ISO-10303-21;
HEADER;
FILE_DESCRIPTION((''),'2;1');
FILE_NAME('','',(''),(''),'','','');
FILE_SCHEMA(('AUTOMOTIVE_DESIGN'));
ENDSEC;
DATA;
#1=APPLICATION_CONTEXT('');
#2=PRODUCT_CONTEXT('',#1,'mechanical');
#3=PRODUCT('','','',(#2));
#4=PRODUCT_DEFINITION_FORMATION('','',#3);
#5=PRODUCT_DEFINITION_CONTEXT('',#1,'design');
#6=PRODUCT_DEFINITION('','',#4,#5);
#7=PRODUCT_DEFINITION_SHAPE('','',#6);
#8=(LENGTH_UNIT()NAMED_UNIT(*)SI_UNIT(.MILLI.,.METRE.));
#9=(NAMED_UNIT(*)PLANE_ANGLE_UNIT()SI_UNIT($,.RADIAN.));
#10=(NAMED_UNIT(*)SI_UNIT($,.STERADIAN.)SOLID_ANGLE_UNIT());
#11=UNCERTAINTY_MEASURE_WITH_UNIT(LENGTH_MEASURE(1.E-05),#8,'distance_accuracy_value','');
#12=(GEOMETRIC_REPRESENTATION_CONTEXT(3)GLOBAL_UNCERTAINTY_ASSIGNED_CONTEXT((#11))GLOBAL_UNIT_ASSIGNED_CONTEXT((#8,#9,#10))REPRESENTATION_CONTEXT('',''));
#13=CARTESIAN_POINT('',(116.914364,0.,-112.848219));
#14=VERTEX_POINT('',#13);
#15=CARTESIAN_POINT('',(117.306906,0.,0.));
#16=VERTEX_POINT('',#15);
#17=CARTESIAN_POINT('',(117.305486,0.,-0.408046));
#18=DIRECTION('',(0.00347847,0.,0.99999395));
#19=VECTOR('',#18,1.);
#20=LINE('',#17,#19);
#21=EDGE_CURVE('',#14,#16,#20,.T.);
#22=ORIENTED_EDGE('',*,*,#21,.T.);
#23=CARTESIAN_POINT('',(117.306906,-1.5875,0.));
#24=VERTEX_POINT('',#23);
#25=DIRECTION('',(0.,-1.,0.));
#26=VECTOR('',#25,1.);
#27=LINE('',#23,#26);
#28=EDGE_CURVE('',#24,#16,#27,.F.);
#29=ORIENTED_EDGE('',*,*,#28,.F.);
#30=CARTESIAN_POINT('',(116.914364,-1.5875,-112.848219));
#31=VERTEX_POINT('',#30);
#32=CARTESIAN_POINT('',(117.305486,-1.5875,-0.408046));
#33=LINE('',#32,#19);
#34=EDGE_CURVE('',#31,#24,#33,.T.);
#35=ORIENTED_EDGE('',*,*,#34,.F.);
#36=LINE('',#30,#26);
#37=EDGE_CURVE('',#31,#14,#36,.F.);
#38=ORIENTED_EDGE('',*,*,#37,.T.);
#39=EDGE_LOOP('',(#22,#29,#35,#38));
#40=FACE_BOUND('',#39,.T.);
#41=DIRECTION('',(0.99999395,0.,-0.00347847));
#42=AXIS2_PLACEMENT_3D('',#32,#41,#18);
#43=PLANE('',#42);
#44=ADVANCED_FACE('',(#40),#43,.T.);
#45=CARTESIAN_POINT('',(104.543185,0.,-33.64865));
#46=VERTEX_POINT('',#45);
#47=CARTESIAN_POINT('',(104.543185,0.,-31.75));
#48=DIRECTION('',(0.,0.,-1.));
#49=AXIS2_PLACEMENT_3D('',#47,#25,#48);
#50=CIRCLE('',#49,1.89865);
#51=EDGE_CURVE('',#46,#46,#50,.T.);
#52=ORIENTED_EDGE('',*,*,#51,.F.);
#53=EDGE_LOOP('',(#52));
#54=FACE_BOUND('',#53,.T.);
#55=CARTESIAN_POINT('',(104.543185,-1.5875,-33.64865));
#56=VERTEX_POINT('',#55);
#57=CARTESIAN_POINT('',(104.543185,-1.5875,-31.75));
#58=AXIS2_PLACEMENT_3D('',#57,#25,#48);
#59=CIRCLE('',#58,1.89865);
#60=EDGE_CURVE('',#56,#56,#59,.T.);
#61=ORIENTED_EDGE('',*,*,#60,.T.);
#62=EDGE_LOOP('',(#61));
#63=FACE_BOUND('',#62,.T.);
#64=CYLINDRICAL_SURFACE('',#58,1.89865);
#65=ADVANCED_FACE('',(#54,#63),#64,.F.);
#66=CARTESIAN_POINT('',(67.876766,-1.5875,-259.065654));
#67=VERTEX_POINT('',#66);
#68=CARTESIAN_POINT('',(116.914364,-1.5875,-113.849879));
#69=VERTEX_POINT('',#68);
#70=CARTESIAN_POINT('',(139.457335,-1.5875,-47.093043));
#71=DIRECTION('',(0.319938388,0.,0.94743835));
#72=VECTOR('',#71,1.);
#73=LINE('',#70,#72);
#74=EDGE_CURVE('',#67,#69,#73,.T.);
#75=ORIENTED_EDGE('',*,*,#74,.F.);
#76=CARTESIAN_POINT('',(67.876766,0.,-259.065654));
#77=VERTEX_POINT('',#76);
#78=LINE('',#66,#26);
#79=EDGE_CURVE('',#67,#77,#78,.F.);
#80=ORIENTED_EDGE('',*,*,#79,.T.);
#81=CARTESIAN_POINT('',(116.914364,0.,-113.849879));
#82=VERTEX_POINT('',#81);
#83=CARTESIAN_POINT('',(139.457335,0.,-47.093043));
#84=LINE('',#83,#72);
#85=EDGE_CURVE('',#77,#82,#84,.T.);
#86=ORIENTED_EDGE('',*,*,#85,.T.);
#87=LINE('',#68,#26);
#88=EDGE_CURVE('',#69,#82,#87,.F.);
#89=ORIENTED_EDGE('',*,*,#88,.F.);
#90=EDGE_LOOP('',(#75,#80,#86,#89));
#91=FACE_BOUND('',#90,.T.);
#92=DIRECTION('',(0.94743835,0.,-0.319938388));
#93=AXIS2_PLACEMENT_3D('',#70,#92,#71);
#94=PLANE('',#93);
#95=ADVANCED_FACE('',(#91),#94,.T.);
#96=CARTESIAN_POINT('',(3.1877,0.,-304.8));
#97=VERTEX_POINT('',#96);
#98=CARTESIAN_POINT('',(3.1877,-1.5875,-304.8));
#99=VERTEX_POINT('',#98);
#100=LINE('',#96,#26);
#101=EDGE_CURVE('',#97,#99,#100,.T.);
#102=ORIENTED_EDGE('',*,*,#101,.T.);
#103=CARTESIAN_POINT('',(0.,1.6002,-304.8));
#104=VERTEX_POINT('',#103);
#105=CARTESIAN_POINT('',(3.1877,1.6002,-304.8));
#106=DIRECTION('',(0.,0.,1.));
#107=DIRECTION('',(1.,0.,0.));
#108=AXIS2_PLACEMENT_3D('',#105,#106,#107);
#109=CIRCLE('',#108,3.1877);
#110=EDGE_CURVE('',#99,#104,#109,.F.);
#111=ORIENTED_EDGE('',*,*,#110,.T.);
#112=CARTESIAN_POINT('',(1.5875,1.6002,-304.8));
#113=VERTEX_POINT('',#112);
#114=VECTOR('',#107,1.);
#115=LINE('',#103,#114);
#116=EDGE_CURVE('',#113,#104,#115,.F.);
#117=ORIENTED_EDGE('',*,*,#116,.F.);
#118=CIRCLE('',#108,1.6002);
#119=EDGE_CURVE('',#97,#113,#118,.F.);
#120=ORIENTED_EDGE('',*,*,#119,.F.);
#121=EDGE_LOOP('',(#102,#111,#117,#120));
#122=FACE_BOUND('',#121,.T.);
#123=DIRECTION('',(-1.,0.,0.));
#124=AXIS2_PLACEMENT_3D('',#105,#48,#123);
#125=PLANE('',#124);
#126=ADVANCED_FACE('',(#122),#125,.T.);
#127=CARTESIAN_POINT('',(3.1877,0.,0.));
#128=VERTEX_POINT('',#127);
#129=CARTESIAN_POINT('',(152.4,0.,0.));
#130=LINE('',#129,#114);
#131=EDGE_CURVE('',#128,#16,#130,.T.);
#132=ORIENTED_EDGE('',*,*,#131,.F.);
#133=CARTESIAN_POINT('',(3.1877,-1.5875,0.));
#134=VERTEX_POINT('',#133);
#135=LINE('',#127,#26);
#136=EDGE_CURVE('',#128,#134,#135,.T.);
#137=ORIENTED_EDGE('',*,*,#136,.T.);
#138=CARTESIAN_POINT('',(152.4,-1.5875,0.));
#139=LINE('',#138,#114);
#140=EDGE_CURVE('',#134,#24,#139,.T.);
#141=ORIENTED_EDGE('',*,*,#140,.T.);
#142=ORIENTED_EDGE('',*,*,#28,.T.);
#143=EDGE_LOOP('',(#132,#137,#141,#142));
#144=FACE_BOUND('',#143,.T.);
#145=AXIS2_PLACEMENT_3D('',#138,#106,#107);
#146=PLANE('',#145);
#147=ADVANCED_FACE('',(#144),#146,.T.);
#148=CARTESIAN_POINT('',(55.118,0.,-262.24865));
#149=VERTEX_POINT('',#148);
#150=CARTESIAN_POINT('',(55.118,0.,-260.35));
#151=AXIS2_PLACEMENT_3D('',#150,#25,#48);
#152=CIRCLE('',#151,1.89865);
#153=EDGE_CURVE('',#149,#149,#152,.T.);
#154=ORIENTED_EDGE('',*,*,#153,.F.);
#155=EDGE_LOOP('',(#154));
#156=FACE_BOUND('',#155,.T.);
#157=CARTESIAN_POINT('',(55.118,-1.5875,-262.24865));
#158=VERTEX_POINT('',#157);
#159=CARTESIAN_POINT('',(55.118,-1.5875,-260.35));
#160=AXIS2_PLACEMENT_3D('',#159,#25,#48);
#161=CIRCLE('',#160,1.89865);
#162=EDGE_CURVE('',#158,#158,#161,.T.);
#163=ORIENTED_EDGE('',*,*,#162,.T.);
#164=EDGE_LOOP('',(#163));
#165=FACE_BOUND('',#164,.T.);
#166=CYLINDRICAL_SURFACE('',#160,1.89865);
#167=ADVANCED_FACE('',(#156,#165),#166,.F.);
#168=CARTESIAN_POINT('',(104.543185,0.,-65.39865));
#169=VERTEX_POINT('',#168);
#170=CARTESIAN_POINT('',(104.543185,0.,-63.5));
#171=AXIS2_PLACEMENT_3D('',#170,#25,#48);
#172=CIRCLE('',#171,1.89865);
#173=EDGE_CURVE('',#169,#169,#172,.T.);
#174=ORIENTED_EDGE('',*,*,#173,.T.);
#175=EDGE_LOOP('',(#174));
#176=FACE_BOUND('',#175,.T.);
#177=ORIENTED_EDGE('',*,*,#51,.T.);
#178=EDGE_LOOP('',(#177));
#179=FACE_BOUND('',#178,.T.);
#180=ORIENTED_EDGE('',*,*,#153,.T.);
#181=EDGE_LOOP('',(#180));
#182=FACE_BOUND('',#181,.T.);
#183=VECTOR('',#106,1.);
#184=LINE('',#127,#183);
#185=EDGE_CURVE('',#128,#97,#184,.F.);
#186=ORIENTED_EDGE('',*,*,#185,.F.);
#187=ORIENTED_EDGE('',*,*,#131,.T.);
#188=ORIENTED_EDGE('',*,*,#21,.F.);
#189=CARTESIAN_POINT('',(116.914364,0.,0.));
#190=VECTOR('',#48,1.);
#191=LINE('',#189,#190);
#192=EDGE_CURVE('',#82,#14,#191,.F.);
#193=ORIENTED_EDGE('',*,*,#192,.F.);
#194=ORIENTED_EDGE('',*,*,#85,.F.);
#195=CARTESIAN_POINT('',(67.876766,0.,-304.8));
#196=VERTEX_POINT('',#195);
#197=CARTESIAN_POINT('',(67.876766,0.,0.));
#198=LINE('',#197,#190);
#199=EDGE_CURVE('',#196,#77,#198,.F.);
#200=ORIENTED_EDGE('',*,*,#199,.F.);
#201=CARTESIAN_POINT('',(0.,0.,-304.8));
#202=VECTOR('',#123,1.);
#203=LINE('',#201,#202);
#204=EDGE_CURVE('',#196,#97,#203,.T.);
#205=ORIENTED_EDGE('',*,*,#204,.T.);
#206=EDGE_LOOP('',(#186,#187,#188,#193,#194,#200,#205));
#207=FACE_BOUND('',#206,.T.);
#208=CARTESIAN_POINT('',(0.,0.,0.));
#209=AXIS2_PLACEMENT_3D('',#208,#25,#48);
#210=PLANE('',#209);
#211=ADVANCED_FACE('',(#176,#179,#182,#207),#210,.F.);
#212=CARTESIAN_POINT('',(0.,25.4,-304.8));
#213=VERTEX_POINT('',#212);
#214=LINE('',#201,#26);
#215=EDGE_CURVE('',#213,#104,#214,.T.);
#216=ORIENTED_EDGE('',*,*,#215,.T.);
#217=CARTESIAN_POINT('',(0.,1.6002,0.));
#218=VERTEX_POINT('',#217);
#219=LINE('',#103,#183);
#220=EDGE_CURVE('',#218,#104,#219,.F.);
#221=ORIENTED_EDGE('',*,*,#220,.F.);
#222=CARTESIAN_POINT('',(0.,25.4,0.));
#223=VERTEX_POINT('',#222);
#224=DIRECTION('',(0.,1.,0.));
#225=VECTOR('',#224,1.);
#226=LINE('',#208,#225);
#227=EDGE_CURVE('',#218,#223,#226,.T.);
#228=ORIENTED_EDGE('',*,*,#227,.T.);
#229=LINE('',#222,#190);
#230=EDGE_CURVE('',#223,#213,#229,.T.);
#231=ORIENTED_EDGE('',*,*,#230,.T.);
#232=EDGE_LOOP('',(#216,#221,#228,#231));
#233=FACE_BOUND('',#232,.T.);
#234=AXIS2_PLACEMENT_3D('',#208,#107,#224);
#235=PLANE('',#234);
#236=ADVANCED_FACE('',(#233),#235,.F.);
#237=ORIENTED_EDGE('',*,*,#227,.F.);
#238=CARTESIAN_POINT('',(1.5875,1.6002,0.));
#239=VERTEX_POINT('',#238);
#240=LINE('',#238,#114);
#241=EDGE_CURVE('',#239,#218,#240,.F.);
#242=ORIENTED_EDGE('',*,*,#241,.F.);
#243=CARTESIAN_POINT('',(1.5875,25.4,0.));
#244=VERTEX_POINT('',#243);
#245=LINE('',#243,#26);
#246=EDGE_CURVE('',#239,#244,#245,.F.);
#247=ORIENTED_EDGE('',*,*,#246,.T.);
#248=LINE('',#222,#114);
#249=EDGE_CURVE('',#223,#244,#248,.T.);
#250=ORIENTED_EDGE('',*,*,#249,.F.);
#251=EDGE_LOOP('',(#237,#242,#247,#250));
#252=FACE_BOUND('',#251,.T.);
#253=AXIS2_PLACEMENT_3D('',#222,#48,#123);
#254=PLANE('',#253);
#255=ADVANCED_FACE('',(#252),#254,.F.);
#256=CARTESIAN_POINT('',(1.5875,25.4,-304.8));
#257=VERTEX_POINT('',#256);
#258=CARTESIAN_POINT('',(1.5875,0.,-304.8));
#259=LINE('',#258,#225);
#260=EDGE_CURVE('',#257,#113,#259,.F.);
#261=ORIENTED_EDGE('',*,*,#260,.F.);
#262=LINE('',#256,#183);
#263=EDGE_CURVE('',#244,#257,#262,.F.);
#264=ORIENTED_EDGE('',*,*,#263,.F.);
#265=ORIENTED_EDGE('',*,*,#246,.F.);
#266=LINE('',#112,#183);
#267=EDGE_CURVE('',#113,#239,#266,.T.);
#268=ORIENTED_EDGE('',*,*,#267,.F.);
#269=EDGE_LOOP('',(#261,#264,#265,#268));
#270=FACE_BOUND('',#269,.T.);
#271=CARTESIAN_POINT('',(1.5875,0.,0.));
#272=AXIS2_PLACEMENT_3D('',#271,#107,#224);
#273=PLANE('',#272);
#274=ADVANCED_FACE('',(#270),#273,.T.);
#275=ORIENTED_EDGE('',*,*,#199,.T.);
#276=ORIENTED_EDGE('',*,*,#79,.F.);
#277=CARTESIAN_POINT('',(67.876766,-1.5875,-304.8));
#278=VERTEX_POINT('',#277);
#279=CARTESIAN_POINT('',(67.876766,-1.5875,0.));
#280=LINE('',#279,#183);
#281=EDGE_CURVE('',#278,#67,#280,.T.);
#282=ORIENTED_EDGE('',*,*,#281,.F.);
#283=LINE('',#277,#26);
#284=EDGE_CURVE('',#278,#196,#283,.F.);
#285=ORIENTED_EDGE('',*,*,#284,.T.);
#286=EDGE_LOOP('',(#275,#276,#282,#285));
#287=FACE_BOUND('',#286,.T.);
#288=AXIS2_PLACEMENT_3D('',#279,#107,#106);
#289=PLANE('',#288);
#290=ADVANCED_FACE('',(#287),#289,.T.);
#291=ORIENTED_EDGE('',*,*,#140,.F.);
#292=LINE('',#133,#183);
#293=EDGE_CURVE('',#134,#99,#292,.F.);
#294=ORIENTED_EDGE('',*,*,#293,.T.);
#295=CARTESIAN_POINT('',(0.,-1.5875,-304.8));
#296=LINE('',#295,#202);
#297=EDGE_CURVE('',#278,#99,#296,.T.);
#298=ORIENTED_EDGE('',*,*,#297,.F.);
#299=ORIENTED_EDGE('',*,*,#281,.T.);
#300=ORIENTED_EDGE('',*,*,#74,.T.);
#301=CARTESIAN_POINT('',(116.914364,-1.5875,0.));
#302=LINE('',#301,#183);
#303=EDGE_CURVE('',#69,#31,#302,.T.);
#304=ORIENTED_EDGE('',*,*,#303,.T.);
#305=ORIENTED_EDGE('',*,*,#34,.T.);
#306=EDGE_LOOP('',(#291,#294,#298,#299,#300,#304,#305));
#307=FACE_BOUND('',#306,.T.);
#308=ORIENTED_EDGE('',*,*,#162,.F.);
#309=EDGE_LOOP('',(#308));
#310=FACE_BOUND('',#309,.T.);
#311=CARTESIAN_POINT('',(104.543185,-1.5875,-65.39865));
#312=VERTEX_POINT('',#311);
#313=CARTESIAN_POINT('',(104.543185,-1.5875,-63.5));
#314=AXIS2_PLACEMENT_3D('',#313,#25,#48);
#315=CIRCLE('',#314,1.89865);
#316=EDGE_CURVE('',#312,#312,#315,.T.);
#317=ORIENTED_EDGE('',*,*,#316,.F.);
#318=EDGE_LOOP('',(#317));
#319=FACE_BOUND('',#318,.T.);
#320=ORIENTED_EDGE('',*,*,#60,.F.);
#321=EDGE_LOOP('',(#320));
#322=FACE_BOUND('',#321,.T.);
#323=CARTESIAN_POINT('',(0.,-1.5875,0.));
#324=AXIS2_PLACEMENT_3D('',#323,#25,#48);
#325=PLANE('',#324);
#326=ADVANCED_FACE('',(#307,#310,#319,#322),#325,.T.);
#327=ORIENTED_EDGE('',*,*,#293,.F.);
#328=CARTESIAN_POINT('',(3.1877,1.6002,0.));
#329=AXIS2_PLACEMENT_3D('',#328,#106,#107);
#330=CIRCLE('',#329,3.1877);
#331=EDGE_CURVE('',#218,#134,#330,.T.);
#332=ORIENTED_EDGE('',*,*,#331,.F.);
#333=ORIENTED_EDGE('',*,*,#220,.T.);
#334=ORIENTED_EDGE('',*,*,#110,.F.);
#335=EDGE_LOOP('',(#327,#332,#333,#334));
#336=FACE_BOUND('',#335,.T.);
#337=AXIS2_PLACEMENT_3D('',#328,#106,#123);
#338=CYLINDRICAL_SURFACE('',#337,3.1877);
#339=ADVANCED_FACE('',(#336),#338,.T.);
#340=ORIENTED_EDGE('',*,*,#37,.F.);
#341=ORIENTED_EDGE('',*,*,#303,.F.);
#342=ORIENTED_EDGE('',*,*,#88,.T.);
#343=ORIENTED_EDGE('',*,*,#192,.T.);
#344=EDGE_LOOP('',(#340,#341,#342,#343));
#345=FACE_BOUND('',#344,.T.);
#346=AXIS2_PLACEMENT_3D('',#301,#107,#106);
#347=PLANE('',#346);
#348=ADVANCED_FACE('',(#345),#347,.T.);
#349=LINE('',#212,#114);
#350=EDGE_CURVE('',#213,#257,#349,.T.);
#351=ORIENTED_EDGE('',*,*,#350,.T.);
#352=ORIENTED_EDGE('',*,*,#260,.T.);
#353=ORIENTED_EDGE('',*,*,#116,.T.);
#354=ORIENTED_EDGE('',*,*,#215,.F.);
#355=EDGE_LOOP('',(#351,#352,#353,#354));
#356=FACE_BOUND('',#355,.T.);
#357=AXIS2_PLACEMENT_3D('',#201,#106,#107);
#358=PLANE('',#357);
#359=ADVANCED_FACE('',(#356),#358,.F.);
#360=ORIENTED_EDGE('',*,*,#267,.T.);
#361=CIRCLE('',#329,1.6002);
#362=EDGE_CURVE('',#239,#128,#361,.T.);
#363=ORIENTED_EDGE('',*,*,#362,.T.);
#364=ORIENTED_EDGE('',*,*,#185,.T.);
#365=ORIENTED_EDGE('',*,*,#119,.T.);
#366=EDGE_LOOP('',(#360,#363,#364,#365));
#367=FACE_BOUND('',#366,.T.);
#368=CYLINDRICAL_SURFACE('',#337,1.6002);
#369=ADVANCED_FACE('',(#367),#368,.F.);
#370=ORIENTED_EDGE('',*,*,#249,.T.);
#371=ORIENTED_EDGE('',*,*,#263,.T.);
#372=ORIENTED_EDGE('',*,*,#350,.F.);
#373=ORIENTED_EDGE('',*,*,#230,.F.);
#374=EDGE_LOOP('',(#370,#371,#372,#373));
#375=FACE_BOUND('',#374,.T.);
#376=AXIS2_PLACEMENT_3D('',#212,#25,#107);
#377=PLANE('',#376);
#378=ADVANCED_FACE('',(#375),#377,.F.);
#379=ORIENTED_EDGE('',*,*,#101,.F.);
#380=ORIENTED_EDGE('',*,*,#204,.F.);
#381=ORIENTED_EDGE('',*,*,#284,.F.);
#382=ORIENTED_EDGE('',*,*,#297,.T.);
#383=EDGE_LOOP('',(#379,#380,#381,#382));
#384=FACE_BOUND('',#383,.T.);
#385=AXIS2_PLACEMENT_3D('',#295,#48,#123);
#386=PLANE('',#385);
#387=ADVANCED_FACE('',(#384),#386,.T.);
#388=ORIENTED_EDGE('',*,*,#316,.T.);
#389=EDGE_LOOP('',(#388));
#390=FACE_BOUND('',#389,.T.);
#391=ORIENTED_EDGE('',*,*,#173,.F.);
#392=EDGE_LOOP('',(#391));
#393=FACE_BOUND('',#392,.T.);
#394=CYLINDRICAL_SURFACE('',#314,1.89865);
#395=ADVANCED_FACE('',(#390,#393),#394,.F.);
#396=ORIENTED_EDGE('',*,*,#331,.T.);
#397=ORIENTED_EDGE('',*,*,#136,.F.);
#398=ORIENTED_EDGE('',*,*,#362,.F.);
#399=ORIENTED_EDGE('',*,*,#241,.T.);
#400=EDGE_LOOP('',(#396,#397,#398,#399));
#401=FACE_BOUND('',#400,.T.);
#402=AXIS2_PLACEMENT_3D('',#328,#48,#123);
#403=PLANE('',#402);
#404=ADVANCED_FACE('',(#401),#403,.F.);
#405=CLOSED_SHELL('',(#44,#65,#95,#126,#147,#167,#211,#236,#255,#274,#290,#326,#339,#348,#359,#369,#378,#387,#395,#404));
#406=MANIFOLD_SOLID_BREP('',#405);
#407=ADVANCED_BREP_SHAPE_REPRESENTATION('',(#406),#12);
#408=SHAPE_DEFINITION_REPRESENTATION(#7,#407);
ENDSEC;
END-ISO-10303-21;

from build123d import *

# Parameters (mm, degrees)
BASE_FLANGE1_DEPTH           = 1.5875
EDGE_FLANGE1_STRIP_W         = 9.5504
EDGE_FLANGE1_STRIP_H         = 1.5875
EDGE_FLANGE1_STRIP_CUT_DEPTH = 304.8
EDGE_FLANGE1_DEPTH           = 304.8
CUT_EXTRUDE1_DEPTH           = 342.722050796
CUT_EXTRUDE1_DEPTH_BACK      = 342.722050796
F_6_CLEARANCE_HOLE1_D        = 3.7973


# Sheet-metal steps are written as plain solids
with BuildPart() as part:
    # Sketch1 → Base-Flange1 (new body)
    with BuildSketch(Plane(origin=(0, 0, 0), x_dir=(1, 0, 0), z_dir=(0, 1, 0))):
        Polygon((0, 304.8), (76.2, 304.8), (152.4, 0), (0, 0), align=None)
    extrude(amount=-BASE_FLANGE1_DEPTH)

    # Edge-Flange1 strip (across the edge) → Edge-Flange1 strip cut (cut)
    with BuildSketch(Plane.XY.offset(-304.8)):
        with Locations((-1.5875, -0.79375)):
            Rectangle(EDGE_FLANGE1_STRIP_W, EDGE_FLANGE1_STRIP_H)
    extrude(amount=EDGE_FLANGE1_STRIP_CUT_DEPTH, mode=Mode.SUBTRACT)

    # Edge-Flange1 section (across the edge) → Edge-Flange1 (add)
    with BuildSketch(Plane.XY.offset(-304.8)):
        with BuildLine():
            Line((0, 1.6002), (0, 25.4))
            Line((0, 25.4), (1.5875, 25.4))
            Line((1.5875, 25.4), (1.5875, 1.6002))
            ThreePointArc((1.5875, 1.6002), (2.056187729, 0.468687729), (3.1877, 0))
            Line((3.1877, 0), (3.1877, -1.5875))
            ThreePointArc((3.1877, -1.5875), (0.933655714, -0.653844286), (0, 1.6002))
        make_face()
    extrude(amount=EDGE_FLANGE1_DEPTH)

    # Sketch10 → Cut-Extrude1 (cut, two sides: drawn at the far end of the back side and taken through both)
    with BuildSketch(Plane(origin=(0, 0, 0), x_dir=(1, 0, 0), z_dir=(0, 1, 0)).offset(-CUT_EXTRUDE1_DEPTH_BACK)):
        Polygon((67.87676626, 967.988947135), (67.87676626, 304.8), (67.87676626, 261.217419128), (67.87676626, 259.06565424), (116.914364331, 113.849879077), (116.914364331, 112.848219234), (117.306905871, 0), (119.613788846, -663.184934911), (1445.325011297, -621.136473854), (1393.587988711, 1010.037408193), align=None)
    extrude(amount=CUT_EXTRUDE1_DEPTH + CUT_EXTRUDE1_DEPTH_BACK, mode=Mode.SUBTRACT)

    # #6 Clearance Hole1 (through all)
    with Locations(Plane(origin=(0, -1.5875, 0), x_dir=(-1, 0, 0), z_dir=(0, -1, 0))):
        with Locations((-55.118000004, 260.349999989), (-104.543184669, 31.750000016), (-104.543184669, 63.500000016)):
            Hole(F_6_CLEARANCE_HOLE1_D / 2)


solid = part.part
